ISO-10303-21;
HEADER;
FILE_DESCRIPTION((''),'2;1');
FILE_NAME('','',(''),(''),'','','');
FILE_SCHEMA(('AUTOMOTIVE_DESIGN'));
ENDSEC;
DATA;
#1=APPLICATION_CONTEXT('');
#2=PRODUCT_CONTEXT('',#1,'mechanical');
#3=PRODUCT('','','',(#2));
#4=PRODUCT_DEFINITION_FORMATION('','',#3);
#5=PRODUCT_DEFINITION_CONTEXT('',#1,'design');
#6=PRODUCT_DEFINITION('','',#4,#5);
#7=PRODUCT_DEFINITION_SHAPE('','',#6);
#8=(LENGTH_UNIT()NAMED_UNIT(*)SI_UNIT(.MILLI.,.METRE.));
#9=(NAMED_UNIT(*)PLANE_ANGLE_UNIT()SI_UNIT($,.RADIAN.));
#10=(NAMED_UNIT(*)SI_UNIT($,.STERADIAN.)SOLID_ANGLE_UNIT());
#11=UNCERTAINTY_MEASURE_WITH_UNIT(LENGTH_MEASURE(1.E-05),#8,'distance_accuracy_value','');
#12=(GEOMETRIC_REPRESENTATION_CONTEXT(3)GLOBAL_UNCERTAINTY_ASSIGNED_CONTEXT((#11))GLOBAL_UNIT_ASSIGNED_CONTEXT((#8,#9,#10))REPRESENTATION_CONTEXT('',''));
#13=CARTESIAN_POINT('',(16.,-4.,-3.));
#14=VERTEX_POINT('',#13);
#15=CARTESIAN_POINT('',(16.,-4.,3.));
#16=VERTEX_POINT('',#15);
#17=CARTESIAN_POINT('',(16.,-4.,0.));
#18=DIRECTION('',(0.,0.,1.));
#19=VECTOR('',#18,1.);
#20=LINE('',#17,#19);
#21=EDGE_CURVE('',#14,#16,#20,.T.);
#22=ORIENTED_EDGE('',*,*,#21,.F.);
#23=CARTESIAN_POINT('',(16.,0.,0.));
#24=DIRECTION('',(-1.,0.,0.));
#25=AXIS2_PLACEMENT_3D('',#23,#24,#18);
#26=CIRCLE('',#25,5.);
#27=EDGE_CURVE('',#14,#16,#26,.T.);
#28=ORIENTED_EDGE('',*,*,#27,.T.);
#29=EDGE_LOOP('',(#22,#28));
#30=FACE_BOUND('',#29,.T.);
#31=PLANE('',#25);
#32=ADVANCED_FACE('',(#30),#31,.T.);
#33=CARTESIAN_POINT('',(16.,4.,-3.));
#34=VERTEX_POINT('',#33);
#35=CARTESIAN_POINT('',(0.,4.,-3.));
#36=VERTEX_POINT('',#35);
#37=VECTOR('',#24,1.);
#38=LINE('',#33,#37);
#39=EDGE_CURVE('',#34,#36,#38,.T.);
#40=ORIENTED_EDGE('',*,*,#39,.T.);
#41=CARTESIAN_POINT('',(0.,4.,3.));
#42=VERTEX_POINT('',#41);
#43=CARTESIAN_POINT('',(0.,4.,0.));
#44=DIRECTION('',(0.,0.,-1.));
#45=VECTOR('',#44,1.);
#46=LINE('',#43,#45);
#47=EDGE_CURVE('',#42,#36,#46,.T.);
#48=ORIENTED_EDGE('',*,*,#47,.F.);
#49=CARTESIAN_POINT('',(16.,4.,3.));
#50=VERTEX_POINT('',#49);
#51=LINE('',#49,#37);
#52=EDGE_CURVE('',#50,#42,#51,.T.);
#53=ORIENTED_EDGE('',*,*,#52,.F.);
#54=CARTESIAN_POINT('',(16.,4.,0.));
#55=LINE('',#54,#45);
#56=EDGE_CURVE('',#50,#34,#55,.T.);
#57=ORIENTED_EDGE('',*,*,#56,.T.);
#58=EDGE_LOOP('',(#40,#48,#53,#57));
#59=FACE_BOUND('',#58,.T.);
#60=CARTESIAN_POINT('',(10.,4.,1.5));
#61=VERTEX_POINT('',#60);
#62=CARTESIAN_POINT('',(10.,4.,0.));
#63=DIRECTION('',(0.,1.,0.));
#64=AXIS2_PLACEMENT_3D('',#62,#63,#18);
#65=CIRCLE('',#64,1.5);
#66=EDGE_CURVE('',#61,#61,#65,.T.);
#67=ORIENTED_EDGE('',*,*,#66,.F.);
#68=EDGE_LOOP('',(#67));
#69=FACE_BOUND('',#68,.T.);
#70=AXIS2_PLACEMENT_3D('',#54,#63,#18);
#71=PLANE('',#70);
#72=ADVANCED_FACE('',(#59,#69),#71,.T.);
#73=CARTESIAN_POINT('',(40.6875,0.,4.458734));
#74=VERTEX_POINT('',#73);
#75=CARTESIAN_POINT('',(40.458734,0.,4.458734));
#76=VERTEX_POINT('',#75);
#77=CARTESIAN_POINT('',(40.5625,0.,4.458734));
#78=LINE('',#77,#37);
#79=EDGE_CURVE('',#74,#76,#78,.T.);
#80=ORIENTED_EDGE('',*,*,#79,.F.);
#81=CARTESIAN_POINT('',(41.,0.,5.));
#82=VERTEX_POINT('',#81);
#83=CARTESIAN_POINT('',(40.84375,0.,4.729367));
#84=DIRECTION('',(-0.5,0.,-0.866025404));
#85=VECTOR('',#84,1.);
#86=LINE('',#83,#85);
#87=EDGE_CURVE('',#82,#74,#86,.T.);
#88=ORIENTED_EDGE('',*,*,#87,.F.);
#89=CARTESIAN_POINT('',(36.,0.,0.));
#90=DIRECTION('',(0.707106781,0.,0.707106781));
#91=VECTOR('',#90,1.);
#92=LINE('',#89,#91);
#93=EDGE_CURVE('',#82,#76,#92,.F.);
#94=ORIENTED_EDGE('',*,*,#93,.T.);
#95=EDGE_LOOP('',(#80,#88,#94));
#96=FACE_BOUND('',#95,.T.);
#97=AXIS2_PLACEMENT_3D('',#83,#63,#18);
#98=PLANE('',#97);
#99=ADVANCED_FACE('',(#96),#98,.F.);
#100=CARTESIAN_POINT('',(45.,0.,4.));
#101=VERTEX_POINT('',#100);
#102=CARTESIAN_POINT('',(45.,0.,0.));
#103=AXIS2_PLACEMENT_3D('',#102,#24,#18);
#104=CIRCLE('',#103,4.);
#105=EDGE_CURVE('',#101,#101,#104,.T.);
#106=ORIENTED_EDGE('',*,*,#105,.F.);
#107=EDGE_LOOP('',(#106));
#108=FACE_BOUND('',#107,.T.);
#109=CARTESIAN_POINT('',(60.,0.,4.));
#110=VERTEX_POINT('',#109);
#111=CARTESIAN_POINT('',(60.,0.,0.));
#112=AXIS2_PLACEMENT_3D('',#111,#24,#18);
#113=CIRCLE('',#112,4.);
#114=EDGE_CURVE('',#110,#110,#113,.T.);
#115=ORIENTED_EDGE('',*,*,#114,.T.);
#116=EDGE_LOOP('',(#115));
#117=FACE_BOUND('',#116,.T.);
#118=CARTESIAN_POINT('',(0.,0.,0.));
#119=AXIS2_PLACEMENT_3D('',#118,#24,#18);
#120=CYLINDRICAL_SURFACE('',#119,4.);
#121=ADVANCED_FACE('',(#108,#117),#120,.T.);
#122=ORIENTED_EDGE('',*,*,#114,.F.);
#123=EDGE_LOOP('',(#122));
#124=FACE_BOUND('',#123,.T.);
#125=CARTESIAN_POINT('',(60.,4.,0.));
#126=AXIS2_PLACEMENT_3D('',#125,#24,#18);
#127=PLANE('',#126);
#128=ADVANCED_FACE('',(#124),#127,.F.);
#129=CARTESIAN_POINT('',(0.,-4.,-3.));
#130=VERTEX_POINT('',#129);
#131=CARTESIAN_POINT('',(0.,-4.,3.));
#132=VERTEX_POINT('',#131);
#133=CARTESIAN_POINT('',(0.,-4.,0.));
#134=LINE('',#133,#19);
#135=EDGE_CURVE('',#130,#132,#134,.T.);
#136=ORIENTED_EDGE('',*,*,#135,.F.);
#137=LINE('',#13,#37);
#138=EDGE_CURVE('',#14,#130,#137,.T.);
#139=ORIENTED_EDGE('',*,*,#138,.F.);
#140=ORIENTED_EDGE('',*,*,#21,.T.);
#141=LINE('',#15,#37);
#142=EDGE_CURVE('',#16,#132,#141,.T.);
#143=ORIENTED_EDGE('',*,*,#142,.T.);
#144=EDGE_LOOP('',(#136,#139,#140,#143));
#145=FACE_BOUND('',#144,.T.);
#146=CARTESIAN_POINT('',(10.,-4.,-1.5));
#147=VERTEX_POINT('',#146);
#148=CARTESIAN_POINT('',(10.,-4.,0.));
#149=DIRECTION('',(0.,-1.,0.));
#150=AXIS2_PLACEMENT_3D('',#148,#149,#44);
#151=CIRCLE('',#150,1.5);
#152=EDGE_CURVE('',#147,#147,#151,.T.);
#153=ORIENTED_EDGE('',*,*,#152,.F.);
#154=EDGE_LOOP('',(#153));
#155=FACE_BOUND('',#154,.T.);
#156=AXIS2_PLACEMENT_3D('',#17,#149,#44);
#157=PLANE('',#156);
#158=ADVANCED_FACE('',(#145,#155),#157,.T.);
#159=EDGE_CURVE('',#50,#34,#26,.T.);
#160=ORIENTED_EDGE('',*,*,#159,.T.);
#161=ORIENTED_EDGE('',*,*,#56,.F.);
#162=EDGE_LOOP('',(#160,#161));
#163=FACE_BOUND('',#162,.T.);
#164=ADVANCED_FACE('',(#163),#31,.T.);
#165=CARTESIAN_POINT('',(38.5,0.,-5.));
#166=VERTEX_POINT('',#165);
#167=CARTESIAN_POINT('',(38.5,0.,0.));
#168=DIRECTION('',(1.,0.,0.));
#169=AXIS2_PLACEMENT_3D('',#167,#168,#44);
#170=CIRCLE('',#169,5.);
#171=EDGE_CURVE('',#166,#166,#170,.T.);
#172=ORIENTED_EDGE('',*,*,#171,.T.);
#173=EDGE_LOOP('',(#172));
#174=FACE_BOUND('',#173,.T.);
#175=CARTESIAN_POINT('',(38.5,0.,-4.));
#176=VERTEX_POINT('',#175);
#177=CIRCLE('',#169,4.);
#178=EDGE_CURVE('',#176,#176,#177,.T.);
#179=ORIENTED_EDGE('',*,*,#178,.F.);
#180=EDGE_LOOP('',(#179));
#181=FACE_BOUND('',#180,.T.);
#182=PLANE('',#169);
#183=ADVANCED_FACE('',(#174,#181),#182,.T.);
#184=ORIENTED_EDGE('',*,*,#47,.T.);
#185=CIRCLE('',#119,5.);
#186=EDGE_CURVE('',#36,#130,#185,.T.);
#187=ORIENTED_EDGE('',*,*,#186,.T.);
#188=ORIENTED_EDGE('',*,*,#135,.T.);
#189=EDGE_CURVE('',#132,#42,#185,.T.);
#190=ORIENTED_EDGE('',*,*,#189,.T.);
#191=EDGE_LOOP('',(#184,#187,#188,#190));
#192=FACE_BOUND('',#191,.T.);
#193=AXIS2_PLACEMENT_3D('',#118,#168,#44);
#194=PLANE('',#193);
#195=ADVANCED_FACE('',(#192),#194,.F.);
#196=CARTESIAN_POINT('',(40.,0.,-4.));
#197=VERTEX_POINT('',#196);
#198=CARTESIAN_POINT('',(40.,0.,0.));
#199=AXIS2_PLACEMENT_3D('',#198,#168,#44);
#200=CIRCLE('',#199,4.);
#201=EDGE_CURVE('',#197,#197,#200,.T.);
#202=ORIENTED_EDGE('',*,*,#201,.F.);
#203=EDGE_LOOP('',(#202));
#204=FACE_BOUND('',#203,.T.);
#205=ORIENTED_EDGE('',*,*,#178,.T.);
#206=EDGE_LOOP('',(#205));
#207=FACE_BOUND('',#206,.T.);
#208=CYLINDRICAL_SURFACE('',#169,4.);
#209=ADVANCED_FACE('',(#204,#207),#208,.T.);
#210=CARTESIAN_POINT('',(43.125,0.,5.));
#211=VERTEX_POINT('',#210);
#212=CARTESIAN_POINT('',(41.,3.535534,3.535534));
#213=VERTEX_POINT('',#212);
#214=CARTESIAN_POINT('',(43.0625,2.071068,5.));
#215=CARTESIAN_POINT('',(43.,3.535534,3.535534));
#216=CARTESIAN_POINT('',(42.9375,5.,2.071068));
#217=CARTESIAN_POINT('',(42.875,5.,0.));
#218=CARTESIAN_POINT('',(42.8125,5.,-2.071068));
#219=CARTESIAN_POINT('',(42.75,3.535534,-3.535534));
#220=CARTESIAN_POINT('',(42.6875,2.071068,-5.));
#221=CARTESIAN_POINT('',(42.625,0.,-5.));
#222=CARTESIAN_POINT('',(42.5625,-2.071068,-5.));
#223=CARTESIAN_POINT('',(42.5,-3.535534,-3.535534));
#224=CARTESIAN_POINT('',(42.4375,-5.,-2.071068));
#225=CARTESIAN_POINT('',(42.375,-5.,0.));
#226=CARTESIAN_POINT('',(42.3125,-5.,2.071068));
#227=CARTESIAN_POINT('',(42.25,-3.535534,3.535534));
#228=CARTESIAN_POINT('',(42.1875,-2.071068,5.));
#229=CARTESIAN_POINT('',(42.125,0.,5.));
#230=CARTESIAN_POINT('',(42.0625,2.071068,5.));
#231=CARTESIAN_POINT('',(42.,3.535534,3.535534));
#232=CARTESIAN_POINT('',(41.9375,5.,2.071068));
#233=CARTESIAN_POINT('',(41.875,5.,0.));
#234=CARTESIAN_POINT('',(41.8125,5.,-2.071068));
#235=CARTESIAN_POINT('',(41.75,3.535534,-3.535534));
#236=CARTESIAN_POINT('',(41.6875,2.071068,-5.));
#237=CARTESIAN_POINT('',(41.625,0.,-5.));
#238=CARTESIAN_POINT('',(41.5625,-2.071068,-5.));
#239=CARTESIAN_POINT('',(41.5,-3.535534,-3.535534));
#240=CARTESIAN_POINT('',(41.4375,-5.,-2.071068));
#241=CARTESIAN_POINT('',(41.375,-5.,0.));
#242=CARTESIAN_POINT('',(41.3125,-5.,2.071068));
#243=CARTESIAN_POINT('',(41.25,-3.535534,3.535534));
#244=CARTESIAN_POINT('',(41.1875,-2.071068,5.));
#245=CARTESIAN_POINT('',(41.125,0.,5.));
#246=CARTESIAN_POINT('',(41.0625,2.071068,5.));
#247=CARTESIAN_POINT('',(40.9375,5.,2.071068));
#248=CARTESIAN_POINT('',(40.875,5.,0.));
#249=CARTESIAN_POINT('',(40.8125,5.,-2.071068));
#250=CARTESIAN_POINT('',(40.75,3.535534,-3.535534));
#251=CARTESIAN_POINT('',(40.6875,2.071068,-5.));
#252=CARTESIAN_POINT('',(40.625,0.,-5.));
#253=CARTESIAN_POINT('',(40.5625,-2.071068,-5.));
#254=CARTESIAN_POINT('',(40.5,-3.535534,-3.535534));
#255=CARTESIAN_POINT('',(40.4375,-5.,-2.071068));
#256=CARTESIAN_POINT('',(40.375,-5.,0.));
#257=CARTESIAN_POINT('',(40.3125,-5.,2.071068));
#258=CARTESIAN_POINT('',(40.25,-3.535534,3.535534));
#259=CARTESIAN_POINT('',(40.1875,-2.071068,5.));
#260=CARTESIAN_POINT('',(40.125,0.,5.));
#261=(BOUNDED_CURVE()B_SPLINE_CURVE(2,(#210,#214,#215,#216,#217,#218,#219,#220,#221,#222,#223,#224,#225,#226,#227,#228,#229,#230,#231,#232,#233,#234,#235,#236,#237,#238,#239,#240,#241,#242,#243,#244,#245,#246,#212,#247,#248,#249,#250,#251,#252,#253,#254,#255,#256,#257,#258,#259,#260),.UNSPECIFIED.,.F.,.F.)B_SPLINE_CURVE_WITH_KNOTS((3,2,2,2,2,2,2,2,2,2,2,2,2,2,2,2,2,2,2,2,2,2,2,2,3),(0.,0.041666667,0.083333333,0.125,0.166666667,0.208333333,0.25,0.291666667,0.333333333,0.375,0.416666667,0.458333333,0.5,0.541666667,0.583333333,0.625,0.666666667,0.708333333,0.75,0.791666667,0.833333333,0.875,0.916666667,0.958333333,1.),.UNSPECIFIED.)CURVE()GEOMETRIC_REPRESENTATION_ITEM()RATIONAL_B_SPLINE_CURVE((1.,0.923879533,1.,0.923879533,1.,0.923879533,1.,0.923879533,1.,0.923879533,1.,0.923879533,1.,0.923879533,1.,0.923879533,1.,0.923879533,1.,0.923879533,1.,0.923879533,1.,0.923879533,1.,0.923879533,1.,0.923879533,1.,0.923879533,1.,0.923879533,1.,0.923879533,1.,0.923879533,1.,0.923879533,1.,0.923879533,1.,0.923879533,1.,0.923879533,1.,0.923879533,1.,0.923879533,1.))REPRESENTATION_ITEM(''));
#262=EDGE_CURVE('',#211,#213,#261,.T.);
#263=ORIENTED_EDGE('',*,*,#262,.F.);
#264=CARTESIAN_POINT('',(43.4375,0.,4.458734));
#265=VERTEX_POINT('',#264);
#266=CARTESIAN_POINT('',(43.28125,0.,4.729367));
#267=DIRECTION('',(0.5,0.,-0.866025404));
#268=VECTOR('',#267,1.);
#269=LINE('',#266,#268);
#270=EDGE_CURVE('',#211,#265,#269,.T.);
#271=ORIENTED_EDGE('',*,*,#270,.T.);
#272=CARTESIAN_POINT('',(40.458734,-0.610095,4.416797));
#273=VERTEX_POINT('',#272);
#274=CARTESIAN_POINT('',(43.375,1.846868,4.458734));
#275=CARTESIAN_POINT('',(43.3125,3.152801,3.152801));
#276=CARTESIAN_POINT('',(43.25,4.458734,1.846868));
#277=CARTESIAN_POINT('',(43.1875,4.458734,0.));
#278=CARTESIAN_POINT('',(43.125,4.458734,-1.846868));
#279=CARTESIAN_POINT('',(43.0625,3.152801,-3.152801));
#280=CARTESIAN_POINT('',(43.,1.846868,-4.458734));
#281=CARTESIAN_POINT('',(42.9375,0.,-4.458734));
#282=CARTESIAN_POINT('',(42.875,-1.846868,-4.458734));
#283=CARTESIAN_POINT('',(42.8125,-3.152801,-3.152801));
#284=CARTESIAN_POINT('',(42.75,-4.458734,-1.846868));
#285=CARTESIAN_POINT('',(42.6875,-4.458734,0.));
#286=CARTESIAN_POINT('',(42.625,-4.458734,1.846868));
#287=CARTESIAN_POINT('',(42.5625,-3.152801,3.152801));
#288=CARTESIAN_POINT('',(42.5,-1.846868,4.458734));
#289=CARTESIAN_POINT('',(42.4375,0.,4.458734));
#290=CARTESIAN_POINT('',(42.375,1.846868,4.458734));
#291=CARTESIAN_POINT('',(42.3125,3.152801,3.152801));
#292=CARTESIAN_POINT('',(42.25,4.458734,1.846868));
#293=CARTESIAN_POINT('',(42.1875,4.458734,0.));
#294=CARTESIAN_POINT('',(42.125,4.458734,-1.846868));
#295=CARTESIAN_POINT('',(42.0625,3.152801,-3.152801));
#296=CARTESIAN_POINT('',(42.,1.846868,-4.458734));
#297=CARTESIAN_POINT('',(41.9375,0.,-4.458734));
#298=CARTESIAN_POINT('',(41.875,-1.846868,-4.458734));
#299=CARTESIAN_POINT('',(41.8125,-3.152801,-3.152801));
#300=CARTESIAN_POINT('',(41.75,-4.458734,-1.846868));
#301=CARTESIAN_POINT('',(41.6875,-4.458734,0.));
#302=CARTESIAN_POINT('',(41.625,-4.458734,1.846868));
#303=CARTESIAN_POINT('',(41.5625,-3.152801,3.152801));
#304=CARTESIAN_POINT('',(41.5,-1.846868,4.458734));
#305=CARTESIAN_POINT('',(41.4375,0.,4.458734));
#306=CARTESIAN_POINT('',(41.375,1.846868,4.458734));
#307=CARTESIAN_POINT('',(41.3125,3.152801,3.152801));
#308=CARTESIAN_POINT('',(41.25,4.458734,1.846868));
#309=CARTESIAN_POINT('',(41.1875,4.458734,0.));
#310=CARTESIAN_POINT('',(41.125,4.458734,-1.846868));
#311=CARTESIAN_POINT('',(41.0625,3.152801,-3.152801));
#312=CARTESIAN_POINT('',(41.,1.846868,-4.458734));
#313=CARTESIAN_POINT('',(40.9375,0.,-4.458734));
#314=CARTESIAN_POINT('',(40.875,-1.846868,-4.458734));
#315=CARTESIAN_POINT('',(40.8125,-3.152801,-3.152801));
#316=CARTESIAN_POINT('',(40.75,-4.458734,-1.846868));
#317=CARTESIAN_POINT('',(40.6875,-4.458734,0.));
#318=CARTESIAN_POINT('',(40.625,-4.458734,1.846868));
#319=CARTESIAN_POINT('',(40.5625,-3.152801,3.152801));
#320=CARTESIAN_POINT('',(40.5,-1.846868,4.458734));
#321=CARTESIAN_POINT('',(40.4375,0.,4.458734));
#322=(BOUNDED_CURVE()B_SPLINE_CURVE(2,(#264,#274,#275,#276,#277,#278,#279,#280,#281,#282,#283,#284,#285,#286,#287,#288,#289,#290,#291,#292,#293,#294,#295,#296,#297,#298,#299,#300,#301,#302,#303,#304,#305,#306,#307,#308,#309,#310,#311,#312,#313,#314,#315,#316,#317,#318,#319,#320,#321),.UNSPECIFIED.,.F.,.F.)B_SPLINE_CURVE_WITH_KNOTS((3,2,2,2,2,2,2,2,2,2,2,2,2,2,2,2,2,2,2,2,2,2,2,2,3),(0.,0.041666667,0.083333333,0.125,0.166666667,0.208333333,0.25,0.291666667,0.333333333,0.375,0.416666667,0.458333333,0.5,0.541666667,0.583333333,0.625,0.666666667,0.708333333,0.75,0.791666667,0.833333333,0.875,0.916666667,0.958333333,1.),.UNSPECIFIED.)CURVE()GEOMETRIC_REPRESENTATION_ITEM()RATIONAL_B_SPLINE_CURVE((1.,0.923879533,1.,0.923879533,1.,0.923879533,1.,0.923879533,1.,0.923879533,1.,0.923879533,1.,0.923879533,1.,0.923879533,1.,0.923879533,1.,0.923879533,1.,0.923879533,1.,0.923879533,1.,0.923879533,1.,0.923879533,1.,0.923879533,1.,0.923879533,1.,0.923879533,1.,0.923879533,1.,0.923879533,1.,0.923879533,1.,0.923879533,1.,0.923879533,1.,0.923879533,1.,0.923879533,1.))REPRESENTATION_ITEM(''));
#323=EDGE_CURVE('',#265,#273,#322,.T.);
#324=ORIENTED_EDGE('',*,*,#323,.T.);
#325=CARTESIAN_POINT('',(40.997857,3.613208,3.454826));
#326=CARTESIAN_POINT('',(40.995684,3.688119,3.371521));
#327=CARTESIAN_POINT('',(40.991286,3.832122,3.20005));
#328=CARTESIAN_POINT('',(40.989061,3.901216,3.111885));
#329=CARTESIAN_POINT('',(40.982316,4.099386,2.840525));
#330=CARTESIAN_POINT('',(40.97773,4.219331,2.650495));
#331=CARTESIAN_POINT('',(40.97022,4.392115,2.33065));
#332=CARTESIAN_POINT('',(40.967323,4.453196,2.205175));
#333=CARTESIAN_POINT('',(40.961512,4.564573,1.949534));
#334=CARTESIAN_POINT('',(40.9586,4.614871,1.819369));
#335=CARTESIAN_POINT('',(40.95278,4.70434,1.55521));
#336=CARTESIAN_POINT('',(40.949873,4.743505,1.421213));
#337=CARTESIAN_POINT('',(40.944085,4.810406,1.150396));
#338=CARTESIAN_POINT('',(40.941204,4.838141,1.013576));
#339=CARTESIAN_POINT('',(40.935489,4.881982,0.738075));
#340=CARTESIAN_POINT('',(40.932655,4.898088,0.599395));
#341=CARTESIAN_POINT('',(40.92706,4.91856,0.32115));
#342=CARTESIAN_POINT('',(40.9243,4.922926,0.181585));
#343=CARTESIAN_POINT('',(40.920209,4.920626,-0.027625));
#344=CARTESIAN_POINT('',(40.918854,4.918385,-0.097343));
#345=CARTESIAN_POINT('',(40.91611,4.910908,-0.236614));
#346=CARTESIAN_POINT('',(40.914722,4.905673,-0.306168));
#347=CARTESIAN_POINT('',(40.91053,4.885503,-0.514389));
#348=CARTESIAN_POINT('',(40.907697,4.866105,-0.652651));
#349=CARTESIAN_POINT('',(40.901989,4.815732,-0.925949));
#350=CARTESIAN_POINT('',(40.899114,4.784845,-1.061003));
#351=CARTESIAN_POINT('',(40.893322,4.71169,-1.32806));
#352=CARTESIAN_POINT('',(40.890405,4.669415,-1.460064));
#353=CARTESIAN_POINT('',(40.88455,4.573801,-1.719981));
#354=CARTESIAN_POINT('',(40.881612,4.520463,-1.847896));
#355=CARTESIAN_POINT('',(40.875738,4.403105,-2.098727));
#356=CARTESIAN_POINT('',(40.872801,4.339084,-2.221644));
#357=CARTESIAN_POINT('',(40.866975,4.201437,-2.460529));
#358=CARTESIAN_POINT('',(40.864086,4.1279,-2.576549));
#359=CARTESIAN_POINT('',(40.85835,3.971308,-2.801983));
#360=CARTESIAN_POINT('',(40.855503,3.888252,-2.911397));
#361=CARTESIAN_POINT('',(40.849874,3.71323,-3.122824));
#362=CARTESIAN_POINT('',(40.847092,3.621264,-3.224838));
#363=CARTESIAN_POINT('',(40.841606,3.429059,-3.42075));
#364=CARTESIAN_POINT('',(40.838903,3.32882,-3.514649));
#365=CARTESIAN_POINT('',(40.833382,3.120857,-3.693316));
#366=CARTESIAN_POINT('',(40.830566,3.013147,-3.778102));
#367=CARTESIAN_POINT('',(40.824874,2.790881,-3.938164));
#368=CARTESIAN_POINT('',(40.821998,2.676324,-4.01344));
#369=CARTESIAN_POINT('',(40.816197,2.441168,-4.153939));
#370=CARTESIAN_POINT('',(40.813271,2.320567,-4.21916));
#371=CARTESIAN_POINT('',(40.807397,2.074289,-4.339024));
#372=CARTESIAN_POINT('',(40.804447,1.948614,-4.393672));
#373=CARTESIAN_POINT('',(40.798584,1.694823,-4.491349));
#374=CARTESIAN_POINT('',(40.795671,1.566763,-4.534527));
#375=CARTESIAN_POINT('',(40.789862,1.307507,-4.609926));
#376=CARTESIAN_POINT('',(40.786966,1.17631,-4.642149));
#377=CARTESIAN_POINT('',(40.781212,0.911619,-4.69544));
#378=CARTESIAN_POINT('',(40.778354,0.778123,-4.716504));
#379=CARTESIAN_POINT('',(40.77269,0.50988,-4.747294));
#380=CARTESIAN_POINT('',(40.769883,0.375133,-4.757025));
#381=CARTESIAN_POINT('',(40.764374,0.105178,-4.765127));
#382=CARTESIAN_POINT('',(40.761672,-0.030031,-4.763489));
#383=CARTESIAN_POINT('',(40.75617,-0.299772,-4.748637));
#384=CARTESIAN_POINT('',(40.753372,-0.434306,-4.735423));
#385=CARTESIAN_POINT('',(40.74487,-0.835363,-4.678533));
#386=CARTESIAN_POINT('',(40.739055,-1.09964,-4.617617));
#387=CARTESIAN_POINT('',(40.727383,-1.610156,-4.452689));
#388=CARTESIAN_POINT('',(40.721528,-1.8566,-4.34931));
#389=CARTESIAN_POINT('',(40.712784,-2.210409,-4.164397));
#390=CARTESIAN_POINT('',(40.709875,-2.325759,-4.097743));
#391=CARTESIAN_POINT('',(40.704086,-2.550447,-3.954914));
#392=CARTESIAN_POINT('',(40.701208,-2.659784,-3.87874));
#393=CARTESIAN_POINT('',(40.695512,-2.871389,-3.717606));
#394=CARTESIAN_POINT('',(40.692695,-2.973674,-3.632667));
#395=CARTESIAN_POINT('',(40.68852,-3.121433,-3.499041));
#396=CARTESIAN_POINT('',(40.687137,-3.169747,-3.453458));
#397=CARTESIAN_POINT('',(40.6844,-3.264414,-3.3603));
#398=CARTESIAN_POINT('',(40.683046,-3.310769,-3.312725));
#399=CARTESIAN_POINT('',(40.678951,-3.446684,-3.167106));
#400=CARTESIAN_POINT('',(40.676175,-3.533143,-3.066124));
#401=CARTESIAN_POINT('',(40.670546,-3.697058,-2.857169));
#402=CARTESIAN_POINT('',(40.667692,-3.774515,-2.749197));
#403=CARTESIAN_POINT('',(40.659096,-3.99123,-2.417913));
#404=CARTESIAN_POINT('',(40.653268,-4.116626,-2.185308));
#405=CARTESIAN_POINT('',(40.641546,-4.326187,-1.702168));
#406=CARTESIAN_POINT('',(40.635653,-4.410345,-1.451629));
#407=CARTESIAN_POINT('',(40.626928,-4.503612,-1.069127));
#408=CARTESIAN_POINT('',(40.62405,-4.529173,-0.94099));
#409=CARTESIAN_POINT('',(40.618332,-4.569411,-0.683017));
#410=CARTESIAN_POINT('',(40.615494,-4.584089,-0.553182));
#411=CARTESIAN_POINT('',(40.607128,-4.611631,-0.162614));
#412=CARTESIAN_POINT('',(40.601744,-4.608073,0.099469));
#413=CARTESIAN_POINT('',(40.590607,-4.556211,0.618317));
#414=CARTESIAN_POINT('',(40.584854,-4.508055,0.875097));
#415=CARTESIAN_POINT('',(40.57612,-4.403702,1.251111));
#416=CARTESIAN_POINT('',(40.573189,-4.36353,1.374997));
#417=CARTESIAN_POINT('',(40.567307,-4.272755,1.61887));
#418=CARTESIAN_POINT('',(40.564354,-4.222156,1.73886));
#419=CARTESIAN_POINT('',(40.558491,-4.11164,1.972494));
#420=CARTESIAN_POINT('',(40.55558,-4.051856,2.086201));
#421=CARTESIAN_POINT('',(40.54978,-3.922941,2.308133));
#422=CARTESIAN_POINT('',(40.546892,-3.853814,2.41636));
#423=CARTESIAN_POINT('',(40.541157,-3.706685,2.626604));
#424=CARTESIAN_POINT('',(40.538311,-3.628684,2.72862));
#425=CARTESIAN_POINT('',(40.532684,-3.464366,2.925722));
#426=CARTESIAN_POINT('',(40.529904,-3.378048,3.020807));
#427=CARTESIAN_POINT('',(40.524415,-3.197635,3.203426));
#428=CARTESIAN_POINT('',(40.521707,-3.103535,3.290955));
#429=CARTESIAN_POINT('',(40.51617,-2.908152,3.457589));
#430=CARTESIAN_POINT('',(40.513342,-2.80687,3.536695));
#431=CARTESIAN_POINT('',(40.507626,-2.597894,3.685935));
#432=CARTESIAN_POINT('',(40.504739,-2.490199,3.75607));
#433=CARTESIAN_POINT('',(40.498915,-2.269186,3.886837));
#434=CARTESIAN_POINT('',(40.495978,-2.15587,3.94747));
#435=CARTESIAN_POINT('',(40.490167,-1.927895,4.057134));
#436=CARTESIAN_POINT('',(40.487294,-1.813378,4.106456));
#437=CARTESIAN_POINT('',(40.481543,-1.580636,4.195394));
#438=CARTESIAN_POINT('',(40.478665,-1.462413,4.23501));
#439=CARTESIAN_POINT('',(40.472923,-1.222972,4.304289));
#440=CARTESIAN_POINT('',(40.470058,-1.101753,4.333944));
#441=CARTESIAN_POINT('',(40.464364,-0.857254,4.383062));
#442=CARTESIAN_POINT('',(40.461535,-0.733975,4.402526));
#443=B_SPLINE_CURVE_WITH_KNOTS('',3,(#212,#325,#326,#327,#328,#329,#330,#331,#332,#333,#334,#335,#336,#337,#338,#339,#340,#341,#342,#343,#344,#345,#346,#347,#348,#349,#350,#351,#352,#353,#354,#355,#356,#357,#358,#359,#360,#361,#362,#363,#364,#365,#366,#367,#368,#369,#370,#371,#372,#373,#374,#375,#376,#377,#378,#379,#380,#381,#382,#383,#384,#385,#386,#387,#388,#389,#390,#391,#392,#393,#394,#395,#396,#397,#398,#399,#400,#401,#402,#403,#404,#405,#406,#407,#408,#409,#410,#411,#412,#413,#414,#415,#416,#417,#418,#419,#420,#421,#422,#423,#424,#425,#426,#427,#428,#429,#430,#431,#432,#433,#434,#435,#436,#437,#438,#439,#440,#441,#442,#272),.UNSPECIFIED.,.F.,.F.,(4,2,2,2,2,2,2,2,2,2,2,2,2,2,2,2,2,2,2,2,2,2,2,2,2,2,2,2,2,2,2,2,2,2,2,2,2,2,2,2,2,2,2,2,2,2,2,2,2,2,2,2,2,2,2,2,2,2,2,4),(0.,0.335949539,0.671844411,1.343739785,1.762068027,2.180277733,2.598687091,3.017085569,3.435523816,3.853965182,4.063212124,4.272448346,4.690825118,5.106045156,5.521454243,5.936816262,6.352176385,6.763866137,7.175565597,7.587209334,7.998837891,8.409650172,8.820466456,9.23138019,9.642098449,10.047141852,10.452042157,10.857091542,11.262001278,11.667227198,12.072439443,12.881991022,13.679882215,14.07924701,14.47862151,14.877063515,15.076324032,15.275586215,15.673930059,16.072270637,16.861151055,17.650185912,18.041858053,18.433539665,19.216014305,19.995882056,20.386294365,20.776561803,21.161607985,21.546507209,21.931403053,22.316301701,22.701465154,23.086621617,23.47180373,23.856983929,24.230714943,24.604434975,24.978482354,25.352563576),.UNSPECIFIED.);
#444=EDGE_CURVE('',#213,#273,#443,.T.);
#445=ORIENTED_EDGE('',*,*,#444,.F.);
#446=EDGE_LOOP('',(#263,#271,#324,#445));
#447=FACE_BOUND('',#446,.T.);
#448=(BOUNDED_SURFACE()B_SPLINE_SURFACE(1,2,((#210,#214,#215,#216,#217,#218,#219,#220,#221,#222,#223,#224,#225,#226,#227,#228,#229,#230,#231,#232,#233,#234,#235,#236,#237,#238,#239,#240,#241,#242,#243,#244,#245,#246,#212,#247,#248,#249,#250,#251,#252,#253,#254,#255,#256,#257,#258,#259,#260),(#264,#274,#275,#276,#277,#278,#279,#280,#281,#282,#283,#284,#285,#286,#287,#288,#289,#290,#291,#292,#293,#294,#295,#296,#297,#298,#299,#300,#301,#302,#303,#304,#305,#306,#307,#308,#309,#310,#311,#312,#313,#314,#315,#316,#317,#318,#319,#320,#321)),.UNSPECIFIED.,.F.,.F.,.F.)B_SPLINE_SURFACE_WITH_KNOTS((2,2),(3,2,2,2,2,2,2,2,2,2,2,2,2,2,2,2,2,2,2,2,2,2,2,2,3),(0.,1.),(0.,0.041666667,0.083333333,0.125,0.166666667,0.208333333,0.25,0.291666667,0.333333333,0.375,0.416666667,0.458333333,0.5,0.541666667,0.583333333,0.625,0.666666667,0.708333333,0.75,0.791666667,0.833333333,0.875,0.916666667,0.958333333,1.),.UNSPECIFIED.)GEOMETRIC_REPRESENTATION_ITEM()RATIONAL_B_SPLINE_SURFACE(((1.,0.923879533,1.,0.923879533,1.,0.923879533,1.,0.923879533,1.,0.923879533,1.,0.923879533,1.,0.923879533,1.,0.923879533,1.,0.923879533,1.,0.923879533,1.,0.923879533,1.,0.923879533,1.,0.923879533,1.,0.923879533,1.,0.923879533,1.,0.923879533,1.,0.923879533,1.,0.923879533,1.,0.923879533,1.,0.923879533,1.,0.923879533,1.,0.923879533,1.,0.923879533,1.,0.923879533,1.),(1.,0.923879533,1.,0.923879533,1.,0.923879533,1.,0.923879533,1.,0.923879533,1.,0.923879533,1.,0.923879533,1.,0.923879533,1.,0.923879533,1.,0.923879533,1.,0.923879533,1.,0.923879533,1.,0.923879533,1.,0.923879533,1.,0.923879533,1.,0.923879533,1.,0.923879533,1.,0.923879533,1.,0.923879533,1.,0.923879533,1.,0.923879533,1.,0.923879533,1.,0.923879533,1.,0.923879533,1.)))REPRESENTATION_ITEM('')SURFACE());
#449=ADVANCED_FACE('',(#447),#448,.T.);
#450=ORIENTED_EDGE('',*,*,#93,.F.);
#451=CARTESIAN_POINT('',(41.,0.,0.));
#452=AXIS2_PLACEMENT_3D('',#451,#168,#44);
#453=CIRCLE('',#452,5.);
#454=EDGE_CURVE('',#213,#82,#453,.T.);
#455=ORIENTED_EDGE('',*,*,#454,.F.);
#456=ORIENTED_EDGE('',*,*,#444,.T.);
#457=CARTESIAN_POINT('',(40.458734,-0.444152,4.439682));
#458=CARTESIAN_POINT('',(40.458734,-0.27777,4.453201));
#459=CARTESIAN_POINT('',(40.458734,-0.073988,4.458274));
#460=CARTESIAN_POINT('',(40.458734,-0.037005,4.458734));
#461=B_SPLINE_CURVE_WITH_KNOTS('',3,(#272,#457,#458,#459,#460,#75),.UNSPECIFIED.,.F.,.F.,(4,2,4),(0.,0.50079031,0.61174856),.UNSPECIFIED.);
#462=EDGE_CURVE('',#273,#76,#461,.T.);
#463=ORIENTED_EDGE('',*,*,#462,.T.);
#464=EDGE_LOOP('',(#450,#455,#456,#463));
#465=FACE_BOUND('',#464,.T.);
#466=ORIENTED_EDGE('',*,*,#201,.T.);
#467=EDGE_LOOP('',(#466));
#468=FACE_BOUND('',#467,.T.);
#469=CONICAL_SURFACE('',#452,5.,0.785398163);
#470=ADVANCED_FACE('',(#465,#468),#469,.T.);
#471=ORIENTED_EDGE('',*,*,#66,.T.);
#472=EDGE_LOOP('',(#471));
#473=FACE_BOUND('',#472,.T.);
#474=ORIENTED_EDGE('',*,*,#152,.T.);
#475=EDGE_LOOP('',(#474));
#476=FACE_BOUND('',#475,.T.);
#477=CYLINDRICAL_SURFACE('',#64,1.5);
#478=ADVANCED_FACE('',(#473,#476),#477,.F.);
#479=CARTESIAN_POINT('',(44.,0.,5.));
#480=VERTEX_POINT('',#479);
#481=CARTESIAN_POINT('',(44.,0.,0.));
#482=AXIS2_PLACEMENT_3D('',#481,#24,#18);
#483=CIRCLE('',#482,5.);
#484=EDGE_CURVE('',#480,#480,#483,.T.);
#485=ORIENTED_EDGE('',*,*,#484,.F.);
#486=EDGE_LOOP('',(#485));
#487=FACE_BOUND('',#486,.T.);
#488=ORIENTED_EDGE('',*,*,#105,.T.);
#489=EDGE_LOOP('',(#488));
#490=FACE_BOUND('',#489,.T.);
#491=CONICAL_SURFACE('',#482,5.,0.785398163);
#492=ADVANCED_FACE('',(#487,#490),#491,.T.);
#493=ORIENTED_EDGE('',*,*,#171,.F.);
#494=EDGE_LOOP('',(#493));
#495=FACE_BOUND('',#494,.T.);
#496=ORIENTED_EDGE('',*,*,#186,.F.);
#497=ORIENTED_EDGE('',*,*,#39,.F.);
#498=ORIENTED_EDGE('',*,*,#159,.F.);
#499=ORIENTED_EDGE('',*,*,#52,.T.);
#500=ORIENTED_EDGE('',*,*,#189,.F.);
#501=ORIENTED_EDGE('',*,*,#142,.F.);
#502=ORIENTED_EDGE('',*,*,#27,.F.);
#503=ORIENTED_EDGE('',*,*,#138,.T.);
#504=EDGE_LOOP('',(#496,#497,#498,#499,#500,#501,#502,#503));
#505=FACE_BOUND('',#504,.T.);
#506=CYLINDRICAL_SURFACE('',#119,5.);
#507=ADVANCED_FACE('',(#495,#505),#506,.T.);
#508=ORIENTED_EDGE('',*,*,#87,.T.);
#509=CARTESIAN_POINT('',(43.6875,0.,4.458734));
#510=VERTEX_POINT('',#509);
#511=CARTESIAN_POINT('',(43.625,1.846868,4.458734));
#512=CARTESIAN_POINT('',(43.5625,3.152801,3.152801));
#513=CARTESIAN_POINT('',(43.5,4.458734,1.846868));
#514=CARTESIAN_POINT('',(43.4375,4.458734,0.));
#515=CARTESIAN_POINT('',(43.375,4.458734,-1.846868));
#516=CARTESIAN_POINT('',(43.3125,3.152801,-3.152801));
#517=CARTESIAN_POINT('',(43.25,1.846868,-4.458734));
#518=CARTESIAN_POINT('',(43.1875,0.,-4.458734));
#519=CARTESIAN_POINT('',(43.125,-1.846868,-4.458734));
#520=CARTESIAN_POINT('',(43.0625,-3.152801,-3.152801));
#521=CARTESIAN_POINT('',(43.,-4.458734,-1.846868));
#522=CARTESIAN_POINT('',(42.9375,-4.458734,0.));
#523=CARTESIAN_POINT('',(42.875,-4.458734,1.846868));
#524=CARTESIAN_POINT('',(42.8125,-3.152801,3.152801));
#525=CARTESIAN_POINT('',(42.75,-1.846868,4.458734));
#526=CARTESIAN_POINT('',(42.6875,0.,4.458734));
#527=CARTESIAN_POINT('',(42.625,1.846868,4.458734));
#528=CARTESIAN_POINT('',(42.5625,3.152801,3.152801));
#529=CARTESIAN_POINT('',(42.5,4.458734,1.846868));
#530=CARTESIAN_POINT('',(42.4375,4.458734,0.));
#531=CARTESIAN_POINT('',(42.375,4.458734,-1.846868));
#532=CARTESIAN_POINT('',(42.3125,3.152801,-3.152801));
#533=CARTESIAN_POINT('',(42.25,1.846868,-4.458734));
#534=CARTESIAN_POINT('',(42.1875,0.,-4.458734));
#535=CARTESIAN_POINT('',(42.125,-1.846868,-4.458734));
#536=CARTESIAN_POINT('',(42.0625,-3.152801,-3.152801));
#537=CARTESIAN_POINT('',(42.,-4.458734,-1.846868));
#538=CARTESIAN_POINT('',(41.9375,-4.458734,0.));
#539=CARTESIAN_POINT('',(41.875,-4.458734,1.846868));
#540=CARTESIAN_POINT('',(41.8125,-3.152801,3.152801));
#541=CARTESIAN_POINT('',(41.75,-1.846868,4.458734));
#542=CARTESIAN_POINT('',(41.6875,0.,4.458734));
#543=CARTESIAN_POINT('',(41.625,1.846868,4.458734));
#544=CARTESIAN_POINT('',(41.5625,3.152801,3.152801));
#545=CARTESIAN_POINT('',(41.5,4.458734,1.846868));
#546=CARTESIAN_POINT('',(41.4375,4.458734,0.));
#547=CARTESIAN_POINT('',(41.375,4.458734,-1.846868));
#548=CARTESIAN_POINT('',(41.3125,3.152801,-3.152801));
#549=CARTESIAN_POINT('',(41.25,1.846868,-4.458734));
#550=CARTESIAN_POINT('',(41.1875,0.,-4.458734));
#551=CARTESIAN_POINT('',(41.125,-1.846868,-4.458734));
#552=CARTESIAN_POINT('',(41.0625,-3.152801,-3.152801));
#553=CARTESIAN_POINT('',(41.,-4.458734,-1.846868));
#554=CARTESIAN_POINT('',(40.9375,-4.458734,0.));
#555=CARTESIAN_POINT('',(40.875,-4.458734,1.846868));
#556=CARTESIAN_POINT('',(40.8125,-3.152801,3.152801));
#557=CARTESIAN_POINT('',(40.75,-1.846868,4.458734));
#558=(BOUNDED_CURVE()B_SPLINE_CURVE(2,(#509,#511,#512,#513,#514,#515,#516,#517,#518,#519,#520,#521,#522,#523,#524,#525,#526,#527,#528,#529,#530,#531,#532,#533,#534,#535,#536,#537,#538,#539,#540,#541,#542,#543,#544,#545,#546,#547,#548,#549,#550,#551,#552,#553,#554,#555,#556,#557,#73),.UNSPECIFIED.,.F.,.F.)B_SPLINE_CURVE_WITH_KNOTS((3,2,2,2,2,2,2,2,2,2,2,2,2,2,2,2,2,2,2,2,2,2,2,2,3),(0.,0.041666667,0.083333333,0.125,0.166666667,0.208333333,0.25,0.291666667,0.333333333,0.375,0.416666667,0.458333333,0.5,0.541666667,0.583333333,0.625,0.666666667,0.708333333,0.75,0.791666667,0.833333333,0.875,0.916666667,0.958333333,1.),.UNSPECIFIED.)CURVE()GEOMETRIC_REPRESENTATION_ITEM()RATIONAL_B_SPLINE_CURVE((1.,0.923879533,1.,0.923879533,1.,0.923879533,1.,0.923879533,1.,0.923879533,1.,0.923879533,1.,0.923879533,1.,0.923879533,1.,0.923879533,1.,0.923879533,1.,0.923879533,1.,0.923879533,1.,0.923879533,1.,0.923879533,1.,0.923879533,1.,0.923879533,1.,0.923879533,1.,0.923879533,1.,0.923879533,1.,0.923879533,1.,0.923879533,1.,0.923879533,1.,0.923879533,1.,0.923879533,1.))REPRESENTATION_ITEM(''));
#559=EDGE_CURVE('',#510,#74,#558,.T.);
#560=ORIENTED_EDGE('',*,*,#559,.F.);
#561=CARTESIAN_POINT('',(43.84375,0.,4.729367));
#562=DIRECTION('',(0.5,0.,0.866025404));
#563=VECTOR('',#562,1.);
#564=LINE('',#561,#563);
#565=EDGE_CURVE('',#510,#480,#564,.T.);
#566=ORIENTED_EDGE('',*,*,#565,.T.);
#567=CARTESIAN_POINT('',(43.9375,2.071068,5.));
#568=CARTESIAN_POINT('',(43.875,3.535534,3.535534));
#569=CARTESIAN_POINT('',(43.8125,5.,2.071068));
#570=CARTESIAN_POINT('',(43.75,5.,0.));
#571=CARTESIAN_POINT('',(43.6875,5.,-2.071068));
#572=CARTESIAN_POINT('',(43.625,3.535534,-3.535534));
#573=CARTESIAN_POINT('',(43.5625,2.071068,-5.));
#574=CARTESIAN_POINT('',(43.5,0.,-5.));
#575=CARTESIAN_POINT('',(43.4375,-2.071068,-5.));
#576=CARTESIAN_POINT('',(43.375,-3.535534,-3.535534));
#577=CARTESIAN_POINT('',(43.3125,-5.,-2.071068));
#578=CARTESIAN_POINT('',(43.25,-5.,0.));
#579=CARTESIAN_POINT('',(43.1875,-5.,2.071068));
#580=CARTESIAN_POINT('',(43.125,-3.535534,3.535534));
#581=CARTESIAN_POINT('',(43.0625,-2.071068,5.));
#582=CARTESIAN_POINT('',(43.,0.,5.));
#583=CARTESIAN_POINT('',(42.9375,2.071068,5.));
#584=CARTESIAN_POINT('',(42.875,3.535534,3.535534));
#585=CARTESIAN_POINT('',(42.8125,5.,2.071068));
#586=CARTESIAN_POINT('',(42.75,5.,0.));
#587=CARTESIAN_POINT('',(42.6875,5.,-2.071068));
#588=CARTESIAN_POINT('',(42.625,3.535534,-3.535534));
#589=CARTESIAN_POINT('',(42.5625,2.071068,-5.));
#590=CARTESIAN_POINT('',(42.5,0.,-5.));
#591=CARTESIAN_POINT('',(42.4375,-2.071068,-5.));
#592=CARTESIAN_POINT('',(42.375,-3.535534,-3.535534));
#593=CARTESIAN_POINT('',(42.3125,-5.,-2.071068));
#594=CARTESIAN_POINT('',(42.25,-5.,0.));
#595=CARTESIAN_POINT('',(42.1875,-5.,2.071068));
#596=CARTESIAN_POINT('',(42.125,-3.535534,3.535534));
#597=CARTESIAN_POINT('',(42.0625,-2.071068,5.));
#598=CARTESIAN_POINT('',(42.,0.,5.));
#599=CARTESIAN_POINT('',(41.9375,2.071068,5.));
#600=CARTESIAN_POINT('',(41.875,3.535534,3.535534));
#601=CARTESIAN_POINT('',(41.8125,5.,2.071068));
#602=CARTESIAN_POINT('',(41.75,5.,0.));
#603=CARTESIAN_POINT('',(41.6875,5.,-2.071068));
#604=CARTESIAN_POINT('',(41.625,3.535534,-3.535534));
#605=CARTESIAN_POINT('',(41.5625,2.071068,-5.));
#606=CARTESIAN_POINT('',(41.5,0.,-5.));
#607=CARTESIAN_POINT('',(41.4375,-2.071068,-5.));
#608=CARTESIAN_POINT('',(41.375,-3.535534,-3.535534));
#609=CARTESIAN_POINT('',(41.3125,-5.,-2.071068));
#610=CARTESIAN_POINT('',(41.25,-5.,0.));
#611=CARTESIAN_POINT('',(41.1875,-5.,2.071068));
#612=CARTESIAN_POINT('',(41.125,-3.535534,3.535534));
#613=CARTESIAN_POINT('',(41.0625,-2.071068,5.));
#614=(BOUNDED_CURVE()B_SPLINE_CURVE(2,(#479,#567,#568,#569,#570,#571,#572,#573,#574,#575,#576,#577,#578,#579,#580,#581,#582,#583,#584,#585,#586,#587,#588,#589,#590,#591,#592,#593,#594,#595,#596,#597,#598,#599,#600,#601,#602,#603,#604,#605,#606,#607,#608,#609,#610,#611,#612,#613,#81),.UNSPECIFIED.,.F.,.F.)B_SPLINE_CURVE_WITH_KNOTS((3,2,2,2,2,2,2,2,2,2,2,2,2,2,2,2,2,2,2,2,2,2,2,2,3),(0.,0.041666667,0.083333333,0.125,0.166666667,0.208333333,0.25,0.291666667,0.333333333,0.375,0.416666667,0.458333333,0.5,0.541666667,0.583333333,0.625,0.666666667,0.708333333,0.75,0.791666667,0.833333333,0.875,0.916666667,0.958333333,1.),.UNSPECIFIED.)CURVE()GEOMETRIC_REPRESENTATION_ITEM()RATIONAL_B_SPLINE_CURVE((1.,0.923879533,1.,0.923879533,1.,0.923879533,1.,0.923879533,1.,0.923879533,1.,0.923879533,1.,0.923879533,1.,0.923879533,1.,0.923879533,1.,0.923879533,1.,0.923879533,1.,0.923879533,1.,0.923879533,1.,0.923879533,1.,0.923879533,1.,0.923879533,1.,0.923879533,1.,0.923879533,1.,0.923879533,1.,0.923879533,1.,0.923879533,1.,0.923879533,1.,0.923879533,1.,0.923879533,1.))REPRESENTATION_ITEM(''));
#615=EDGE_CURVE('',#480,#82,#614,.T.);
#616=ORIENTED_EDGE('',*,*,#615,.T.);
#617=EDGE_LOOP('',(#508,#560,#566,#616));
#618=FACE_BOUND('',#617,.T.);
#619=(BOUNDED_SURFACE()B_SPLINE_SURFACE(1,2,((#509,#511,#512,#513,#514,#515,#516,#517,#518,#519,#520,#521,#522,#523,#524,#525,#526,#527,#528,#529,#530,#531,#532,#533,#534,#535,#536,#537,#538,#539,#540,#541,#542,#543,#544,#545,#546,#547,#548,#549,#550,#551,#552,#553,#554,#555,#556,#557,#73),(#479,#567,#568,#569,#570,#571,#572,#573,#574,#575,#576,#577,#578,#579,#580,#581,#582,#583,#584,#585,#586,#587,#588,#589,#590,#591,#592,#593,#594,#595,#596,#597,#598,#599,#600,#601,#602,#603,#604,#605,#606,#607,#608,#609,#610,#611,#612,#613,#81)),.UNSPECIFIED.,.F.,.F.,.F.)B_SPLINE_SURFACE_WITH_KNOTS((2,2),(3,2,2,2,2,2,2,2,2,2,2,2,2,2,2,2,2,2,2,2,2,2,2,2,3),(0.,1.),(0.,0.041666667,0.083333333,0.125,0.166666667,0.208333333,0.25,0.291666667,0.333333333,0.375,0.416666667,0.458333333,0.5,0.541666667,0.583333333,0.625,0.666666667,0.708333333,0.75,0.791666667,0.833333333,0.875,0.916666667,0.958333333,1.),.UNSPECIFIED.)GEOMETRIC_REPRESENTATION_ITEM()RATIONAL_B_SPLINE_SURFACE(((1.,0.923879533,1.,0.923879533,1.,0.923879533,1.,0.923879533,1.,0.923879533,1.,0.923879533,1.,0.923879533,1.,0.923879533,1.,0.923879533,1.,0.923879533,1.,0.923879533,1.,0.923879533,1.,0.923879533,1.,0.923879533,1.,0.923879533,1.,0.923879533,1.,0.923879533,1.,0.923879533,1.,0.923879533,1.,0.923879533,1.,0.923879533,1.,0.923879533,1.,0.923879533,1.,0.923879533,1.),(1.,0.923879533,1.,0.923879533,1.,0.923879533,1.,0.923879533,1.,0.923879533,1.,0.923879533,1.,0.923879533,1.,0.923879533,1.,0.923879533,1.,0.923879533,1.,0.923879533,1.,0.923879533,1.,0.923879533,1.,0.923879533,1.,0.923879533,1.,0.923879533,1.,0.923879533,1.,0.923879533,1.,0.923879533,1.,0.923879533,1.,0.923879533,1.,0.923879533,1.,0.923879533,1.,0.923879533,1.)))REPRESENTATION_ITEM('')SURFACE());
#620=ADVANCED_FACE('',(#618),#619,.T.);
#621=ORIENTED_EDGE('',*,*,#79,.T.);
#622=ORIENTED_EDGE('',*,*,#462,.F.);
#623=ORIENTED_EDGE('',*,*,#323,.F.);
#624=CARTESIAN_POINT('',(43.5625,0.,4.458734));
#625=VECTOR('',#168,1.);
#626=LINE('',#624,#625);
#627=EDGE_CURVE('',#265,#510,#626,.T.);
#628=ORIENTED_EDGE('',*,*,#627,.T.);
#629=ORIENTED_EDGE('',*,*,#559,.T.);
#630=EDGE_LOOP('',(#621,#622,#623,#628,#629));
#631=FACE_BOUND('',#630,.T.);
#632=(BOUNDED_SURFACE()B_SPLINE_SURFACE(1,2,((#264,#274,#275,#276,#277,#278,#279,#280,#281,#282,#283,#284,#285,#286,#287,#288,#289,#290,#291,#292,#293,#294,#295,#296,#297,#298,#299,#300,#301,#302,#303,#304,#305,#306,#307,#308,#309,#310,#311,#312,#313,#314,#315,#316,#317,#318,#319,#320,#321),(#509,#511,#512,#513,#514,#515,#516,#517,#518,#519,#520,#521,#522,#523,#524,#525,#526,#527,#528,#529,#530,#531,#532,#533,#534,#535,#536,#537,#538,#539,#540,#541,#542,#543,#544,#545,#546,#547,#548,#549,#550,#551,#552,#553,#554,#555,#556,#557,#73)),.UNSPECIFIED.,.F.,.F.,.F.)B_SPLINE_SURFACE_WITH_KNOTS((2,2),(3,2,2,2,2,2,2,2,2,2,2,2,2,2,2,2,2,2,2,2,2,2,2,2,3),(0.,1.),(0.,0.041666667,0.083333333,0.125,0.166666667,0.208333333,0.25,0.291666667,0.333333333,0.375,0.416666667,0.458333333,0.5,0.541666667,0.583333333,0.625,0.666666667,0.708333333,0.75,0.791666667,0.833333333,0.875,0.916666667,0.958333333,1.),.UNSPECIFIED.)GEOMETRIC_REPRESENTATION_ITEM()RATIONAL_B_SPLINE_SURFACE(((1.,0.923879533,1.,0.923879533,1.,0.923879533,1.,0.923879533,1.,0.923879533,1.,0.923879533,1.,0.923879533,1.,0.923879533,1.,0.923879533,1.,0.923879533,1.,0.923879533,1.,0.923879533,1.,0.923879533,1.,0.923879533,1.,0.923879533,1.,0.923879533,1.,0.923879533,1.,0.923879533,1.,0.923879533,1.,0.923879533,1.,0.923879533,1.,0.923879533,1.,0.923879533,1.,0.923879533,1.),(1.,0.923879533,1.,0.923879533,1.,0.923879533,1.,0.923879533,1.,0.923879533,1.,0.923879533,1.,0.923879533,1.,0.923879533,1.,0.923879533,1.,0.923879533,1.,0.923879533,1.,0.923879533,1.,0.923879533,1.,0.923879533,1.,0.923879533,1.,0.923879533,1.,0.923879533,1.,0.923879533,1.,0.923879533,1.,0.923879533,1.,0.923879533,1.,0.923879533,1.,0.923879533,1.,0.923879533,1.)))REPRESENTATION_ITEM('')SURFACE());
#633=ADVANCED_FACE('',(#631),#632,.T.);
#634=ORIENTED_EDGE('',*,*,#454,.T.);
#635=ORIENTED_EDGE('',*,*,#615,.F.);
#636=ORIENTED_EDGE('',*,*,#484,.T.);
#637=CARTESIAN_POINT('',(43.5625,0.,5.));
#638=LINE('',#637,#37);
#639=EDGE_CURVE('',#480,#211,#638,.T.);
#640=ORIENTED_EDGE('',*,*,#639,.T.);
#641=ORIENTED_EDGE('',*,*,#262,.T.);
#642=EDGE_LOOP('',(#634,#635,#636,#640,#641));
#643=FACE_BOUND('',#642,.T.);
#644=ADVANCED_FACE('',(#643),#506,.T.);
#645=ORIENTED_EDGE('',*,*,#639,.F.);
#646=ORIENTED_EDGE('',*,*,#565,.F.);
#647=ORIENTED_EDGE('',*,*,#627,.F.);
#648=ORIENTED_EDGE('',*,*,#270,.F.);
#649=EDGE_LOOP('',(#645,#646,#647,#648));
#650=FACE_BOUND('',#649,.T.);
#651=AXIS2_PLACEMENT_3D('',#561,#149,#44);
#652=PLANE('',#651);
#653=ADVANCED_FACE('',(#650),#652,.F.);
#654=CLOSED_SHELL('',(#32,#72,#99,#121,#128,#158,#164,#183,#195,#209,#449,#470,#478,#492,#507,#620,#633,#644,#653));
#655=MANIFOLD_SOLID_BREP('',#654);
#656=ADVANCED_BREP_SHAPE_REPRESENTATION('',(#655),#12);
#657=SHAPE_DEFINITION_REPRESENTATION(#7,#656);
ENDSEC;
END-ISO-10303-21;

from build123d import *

# Parameters (mm, degrees)
CUT_EXTRUDE1_START    = -16
CUT_EXTRUDE1_DEPTH    = 16
F_3_0MM_DOWEL_HOLE1_D = 3
CUT_EXTRUDE3_START    = -20
SKETCH17_R            = 5
SKETCH17_R_2          = 4
CUT_EXTRUDE3_DEPTH    = 1.5
CHAMFER2_SIZE         = 1
THREAD2_PITCH         = 1


with BuildPart() as part:
    # Sketch1 → Revolve1 (revolve)
    with BuildSketch(Plane.XY, mode=Mode.PRIVATE) as revolve1_sk:
        Polygon((0, 0), (0, 5), (45, 5), (45, 4), (60, 4), (60, 0), align=None)
    revolve(revolve1_sk.sketch.rotate(Axis((0, 0, 0), (1, 0, 0)), 90), axis=Axis((0, 0, 0), (1, 0, 0)))

    # Sketch2 → Cut-Extrude1 (cut)
    with BuildSketch(Plane.ZY.offset(CUT_EXTRUDE1_START)):
        with BuildLine():
            Line((-3, 4), (3, 4))
            ThreePointArc((3, 4), (0, 5), (-3, 4))
        make_face()
        with BuildLine():
            Line((3, -4), (-3, -4))
            ThreePointArc((-3, -4), (0, -5), (3, -4))
        make_face()
    extrude(amount=CUT_EXTRUDE1_DEPTH, mode=Mode.SUBTRACT)

    # Ø3.0mm Dowel Hole1 (through all)
    with Locations(Plane(origin=(0, 4, 0), x_dir=(1, 0, 0), z_dir=(0, 1, 0))):
        with Locations((10, 0)):
            Hole(F_3_0MM_DOWEL_HOLE1_D / 2)

    # Sketch17 → Cut-Extrude3 (cut)
    with BuildSketch(Plane(origin=(60, 0, 0), x_dir=(0, 0, -1), z_dir=(1, 0, 0)).offset(CUT_EXTRUDE3_START)):
        with Locations(Location((0, 0, 0), (0, 0, 180))):
            Circle(SKETCH17_R)
        with Locations(Location((0, 0, 0), (0, 0, 180))):
            Circle(SKETCH17_R_2, mode=Mode.SUBTRACT)
    extrude(amount=-CUT_EXTRUDE3_DEPTH, mode=Mode.SUBTRACT)

    # Chamfer2
    chamfer2_edges = [part.edges().sort_by_distance(p)[0] for p in [
        (40, 0, -5),
        (45, 0, -5),
    ]]
    chamfer(chamfer2_edges, length=CHAMFER2_SIZE - 0.0001)  # a hair under: the kernel refuses the full size

    # Thread2: the profile of Thread Profile2 profile screwed along a right-hand helix of 3 turns, 8 arcs to a turn; built about Z, then put on its axis
    thread2_z = Axis((0, 0, 0), (0, 0, 1))
    thread2_corners = [(5.0003, 0, -0.000173205), (5.0003, 0, 0.875173202), (4.458734125, 0, 0.562499999), (4.458734125, 0, 0.312499999)]
    with BuildLine(mode=Mode.PRIVATE) as thread2_profile:
        Line(thread2_corners[0], thread2_corners[1])
        Line(thread2_corners[1], thread2_corners[2])
        Line(thread2_corners[2], thread2_corners[3])
        Line(thread2_corners[3], thread2_corners[0])
    thread2_cap = Face(thread2_profile.wire())
    thread2_turn_angles = [0, 22.5, 45, 67.5, 90, 112.5, 135, 157.5, 180, 202.5, 225, 247.5, 270, 292.5, 315, 337.5, 360]
    thread2_turn_weights = [1, 0.9238795325112867, 1, 0.9238795325112867, 1, 0.9238795325112867, 1, 0.9238795325112867, 1, 0.9238795325112867, 1, 0.9238795325112867, 1, 0.9238795325112867, 1, 0.9238795325112867, 1]
    thread2_turn_rails = [Edge.make_bspline([Vector(p[0], p[1], 0).rotate(thread2_z, thread2_turn_angles[k]) / thread2_turn_weights[k] + Vector(0, 0, p[2] + THREAD2_PITCH * thread2_turn_angles[k] / 360) for k in range(17)], [0, 0, 0, 1, 1, 2, 2, 3, 3, 4, 4, 5, 5, 6, 6, 7, 7, 8, 8, 8], 2, thread2_turn_weights) for p in thread2_corners]
    thread2_turn_sides = [Face.make_surface_from_curves(thread2_turn_rails[p[0]], thread2_turn_rails[p[1]]) for p in [(0, 1), (1, 2), (2, 3), (3, 0)]]
    thread2 = Plane(origin=(44, 0, 0), x_dir=(0, 0, 1), z_dir=(-1, 0, 0)) * Solid(Shell([*[p.moved(Location((0, 0, THREAD2_PITCH * i))) for i in range(3) for p in thread2_turn_sides], thread2_cap, thread2_cap.rotate(thread2_z, 1080).moved(Location((0, 0, THREAD2_PITCH * 1080 / 360)))]))
    add(thread2, mode=Mode.SUBTRACT)


solid = part.part
